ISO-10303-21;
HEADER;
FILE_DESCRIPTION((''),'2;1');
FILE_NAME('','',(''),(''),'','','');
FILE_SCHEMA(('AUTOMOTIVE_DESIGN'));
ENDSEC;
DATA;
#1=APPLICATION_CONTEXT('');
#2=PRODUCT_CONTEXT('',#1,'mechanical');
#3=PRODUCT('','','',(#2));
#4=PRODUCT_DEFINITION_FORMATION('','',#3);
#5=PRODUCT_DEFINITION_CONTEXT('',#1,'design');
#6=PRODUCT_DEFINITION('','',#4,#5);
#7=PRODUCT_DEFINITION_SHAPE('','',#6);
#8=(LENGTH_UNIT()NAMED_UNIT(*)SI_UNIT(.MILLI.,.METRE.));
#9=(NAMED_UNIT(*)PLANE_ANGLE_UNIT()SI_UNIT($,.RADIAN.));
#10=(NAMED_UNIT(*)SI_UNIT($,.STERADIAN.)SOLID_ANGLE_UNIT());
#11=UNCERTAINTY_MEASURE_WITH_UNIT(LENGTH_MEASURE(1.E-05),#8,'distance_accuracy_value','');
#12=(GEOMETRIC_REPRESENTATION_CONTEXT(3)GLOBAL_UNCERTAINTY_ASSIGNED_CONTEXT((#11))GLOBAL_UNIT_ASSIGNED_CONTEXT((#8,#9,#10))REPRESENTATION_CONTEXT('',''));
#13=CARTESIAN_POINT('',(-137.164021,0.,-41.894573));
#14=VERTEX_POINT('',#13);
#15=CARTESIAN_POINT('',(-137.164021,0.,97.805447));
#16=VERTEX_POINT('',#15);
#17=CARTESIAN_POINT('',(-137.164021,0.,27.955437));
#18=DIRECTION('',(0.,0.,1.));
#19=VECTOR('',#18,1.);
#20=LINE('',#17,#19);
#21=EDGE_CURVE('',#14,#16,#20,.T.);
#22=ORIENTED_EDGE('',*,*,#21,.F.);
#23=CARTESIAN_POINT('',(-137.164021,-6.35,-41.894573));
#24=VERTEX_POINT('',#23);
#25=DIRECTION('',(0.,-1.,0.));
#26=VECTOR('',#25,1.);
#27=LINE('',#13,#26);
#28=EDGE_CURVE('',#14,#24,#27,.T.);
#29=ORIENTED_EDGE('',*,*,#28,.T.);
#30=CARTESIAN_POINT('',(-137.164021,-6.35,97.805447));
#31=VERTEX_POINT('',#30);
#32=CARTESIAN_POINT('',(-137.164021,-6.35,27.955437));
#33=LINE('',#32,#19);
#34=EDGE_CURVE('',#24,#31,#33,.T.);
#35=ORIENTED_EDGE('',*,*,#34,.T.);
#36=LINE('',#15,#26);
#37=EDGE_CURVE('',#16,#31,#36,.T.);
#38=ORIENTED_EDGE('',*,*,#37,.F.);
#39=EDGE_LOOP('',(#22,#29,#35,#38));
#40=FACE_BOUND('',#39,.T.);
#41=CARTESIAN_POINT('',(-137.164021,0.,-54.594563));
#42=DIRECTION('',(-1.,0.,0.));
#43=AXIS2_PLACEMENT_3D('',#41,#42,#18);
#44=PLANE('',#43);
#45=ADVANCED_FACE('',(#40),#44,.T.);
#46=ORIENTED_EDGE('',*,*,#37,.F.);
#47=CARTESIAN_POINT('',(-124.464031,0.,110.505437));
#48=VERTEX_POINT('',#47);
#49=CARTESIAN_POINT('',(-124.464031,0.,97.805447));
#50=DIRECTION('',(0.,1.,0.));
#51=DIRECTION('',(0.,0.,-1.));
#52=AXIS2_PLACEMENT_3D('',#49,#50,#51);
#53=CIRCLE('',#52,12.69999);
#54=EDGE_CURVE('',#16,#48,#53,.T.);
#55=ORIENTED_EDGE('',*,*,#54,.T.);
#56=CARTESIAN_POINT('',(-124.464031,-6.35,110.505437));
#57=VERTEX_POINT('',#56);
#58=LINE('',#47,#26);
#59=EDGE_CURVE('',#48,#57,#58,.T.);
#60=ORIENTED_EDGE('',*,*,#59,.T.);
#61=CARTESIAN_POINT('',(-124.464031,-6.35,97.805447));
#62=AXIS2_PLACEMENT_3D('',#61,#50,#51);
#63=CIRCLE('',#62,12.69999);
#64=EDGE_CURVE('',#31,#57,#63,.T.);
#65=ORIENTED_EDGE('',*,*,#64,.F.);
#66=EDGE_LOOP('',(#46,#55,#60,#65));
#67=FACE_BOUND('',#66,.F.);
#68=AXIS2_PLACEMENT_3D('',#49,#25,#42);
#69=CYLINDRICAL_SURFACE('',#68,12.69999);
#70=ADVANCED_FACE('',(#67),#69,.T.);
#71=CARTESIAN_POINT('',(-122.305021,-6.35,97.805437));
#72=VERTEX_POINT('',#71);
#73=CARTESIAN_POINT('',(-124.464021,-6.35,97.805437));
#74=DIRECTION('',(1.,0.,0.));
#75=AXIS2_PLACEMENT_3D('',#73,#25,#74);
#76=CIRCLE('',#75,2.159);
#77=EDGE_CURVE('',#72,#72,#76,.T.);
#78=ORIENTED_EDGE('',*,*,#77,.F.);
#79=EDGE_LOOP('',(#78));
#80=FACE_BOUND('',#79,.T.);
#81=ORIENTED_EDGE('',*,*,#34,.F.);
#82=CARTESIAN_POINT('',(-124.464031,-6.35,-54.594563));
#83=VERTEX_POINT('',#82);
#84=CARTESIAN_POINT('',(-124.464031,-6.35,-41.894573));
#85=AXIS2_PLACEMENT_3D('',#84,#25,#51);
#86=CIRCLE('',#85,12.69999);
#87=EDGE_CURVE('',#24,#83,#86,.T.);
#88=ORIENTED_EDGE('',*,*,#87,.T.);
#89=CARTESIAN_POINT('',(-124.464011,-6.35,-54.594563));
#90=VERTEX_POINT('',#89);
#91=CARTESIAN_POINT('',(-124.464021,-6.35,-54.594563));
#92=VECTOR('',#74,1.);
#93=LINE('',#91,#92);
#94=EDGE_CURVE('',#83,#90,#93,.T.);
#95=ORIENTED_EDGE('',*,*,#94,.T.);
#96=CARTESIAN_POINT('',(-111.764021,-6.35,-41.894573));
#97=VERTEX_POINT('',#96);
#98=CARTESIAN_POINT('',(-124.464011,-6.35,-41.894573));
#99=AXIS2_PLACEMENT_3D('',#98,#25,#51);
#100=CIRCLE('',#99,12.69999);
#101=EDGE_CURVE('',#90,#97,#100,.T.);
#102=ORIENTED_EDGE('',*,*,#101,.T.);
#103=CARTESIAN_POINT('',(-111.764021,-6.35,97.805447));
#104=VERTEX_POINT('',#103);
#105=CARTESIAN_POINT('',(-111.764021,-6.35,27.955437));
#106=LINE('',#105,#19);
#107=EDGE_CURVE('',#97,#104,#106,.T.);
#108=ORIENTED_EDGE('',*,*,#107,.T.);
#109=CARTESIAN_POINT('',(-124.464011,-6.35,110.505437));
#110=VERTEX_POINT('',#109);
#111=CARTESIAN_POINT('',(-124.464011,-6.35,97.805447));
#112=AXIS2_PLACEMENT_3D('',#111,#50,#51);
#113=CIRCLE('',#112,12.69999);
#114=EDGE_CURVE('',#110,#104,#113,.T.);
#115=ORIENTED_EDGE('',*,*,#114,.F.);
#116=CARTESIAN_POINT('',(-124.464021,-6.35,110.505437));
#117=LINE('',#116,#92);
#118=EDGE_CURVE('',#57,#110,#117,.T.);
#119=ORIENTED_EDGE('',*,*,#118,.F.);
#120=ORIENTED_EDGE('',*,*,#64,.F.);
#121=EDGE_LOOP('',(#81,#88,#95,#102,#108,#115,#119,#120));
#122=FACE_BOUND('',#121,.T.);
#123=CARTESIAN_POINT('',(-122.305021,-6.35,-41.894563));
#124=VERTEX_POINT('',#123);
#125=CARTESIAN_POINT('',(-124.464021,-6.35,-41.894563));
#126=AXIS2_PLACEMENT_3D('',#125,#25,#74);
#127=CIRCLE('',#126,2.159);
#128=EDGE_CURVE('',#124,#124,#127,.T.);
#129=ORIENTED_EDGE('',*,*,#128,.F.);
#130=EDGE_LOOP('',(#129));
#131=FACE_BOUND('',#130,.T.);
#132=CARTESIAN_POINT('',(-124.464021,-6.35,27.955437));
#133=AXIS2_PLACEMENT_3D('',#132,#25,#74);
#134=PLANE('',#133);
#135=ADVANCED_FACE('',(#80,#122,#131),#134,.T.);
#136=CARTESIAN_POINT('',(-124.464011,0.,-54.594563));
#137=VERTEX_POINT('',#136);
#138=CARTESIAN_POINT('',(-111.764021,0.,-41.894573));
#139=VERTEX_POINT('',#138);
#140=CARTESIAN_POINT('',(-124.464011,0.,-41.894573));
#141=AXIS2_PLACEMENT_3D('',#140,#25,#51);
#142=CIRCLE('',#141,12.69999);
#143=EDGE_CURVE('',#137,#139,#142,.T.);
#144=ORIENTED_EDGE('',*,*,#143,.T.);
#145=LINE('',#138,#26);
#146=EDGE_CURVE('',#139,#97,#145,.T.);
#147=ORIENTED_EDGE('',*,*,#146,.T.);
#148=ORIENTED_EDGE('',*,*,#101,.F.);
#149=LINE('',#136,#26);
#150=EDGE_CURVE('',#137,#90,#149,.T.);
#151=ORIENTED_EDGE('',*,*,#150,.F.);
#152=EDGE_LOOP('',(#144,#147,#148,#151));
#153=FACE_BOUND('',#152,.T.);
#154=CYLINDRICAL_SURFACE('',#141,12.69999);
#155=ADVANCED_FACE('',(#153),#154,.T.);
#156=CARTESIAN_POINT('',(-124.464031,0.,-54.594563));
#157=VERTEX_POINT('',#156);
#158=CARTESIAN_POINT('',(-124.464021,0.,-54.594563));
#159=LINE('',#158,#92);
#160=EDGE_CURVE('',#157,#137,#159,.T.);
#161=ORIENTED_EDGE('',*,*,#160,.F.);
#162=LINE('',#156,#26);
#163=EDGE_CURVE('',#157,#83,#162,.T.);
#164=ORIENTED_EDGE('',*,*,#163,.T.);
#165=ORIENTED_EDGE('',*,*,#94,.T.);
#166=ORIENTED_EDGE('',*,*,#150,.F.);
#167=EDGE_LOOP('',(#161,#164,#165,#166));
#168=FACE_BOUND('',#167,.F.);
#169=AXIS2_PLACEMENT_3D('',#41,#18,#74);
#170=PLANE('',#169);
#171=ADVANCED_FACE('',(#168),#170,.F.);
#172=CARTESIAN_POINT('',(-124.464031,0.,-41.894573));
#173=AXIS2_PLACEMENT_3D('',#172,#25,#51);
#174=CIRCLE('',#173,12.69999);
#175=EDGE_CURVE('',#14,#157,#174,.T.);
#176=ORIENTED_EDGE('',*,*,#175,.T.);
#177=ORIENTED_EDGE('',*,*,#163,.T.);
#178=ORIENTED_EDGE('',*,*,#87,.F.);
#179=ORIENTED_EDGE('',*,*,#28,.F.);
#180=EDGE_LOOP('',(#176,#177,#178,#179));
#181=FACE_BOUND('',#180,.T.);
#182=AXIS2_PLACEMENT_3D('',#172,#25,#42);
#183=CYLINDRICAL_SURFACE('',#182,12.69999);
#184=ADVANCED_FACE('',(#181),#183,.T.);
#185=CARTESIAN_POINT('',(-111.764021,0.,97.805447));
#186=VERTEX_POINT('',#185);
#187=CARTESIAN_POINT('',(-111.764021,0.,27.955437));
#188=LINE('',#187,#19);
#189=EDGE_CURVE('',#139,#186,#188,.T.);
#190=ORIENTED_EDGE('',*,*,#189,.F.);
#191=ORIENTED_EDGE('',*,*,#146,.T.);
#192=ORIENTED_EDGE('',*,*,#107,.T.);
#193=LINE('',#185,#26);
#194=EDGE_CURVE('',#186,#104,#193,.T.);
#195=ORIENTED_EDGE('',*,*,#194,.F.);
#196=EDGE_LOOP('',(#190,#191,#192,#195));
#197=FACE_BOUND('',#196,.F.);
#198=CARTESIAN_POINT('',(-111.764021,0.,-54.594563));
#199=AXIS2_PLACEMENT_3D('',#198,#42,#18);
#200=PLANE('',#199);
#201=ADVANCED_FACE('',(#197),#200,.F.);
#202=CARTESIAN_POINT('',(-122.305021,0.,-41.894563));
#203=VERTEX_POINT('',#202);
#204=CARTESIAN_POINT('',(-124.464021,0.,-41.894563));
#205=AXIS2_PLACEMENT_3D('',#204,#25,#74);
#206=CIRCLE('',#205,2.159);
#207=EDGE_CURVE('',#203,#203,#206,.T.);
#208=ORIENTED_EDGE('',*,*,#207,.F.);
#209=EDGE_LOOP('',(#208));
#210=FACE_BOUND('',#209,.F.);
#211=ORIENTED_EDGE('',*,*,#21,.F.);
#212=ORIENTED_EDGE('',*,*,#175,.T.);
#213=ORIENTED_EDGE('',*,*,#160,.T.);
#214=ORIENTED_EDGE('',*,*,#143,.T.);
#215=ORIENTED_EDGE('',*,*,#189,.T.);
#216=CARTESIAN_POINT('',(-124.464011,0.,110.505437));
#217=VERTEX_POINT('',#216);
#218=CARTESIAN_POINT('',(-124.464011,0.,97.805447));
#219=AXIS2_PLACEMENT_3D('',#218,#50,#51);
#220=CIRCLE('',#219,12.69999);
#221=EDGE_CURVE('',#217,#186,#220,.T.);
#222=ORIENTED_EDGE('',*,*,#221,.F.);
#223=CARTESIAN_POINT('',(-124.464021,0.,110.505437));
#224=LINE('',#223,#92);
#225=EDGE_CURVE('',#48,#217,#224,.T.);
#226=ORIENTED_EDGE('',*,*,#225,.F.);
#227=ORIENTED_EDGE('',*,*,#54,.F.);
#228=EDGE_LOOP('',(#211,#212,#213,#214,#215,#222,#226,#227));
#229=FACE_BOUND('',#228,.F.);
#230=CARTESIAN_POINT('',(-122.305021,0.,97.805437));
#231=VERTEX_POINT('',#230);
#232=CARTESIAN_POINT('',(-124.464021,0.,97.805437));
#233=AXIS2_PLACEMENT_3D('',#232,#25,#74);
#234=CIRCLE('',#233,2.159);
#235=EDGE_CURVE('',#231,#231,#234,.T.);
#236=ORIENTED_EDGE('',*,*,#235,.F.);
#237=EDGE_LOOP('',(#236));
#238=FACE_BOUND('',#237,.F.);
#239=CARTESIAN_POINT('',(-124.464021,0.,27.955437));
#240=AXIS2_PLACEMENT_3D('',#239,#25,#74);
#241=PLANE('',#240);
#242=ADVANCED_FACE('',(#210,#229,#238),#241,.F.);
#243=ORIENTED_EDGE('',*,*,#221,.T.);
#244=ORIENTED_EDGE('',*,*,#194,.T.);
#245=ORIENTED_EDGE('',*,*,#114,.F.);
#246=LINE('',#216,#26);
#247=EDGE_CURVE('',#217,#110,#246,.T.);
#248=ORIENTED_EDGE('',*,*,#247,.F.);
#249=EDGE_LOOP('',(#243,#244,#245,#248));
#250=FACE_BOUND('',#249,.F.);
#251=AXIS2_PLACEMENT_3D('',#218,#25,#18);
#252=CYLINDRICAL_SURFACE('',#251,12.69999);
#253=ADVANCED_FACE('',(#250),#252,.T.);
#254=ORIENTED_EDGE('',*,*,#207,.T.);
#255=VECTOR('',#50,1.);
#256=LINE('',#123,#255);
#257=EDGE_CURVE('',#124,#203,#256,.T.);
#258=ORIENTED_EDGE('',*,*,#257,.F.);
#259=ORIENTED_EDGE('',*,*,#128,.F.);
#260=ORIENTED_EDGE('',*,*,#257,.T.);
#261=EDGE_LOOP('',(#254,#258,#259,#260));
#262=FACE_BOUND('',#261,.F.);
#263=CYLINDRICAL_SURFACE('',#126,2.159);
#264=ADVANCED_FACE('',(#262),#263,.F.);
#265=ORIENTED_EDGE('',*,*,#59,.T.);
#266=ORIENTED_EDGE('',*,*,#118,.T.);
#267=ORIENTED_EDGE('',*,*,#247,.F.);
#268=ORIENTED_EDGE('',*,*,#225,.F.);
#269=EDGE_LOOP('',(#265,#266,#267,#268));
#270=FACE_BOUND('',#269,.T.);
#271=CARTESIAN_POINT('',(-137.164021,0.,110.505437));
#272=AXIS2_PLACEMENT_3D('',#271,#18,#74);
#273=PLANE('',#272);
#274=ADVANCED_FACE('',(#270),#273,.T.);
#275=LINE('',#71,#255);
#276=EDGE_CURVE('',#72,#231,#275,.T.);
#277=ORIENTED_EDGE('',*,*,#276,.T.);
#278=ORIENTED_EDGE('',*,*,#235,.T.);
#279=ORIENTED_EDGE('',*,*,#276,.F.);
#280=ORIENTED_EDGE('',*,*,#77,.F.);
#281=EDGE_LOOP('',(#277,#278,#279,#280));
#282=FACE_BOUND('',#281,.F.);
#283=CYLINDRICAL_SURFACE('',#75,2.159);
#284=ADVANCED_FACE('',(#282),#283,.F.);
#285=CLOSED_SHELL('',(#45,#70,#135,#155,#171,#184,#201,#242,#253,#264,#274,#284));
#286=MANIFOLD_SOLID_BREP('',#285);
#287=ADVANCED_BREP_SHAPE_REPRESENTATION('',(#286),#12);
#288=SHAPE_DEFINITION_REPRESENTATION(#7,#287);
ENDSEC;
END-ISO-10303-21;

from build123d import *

# Parameters (mm, degrees)
F0_W     = 25.4
F0_H     = 165.1
F1_DEPTH = 6.35
F2_R     = 2.159
F3_DEPTH = 25.4
F4_R     = 12.69999


# Not quite as in the source:
# - a fillet or chamfer is up to 0.001 mm smaller than in the source, because OpenCascade refuses the exact size


with BuildPart() as f1:
    # F0 (on Front) → F1 (new body)
    with BuildSketch(Plane.XZ):
        with Locations((-124.4640206625, 27.955437386)):
            Rectangle(F0_W, F0_H)
    extrude(amount=F1_DEPTH)

    # F2 (on face) → F3 (cut)
    with BuildSketch(Plane.XZ.offset(6.35)):
        with Locations((-124.4640206625, 97.805437386)):
            Circle(F2_R)
        with Locations((-124.4640206625, -41.894562614)):
            Circle(F2_R)
    extrude(amount=-F3_DEPTH, mode=Mode.SUBTRACT)

    # F4 (radius 12.7 in the source; OpenCascade refuses exactly that, so slightly less here)
    f4_edges = [f1.edges().sort_by_distance(p)[0] for p in [
        (-137.164021, -3.175, 110.505437),
        (-111.764021, -3.175, 110.505437),
        (-137.164021, -3.175, -54.594563),
        (-111.764021, -3.175, -54.594563),
    ]]
    fillet(f4_edges, radius=F4_R)


solid = f1.part
